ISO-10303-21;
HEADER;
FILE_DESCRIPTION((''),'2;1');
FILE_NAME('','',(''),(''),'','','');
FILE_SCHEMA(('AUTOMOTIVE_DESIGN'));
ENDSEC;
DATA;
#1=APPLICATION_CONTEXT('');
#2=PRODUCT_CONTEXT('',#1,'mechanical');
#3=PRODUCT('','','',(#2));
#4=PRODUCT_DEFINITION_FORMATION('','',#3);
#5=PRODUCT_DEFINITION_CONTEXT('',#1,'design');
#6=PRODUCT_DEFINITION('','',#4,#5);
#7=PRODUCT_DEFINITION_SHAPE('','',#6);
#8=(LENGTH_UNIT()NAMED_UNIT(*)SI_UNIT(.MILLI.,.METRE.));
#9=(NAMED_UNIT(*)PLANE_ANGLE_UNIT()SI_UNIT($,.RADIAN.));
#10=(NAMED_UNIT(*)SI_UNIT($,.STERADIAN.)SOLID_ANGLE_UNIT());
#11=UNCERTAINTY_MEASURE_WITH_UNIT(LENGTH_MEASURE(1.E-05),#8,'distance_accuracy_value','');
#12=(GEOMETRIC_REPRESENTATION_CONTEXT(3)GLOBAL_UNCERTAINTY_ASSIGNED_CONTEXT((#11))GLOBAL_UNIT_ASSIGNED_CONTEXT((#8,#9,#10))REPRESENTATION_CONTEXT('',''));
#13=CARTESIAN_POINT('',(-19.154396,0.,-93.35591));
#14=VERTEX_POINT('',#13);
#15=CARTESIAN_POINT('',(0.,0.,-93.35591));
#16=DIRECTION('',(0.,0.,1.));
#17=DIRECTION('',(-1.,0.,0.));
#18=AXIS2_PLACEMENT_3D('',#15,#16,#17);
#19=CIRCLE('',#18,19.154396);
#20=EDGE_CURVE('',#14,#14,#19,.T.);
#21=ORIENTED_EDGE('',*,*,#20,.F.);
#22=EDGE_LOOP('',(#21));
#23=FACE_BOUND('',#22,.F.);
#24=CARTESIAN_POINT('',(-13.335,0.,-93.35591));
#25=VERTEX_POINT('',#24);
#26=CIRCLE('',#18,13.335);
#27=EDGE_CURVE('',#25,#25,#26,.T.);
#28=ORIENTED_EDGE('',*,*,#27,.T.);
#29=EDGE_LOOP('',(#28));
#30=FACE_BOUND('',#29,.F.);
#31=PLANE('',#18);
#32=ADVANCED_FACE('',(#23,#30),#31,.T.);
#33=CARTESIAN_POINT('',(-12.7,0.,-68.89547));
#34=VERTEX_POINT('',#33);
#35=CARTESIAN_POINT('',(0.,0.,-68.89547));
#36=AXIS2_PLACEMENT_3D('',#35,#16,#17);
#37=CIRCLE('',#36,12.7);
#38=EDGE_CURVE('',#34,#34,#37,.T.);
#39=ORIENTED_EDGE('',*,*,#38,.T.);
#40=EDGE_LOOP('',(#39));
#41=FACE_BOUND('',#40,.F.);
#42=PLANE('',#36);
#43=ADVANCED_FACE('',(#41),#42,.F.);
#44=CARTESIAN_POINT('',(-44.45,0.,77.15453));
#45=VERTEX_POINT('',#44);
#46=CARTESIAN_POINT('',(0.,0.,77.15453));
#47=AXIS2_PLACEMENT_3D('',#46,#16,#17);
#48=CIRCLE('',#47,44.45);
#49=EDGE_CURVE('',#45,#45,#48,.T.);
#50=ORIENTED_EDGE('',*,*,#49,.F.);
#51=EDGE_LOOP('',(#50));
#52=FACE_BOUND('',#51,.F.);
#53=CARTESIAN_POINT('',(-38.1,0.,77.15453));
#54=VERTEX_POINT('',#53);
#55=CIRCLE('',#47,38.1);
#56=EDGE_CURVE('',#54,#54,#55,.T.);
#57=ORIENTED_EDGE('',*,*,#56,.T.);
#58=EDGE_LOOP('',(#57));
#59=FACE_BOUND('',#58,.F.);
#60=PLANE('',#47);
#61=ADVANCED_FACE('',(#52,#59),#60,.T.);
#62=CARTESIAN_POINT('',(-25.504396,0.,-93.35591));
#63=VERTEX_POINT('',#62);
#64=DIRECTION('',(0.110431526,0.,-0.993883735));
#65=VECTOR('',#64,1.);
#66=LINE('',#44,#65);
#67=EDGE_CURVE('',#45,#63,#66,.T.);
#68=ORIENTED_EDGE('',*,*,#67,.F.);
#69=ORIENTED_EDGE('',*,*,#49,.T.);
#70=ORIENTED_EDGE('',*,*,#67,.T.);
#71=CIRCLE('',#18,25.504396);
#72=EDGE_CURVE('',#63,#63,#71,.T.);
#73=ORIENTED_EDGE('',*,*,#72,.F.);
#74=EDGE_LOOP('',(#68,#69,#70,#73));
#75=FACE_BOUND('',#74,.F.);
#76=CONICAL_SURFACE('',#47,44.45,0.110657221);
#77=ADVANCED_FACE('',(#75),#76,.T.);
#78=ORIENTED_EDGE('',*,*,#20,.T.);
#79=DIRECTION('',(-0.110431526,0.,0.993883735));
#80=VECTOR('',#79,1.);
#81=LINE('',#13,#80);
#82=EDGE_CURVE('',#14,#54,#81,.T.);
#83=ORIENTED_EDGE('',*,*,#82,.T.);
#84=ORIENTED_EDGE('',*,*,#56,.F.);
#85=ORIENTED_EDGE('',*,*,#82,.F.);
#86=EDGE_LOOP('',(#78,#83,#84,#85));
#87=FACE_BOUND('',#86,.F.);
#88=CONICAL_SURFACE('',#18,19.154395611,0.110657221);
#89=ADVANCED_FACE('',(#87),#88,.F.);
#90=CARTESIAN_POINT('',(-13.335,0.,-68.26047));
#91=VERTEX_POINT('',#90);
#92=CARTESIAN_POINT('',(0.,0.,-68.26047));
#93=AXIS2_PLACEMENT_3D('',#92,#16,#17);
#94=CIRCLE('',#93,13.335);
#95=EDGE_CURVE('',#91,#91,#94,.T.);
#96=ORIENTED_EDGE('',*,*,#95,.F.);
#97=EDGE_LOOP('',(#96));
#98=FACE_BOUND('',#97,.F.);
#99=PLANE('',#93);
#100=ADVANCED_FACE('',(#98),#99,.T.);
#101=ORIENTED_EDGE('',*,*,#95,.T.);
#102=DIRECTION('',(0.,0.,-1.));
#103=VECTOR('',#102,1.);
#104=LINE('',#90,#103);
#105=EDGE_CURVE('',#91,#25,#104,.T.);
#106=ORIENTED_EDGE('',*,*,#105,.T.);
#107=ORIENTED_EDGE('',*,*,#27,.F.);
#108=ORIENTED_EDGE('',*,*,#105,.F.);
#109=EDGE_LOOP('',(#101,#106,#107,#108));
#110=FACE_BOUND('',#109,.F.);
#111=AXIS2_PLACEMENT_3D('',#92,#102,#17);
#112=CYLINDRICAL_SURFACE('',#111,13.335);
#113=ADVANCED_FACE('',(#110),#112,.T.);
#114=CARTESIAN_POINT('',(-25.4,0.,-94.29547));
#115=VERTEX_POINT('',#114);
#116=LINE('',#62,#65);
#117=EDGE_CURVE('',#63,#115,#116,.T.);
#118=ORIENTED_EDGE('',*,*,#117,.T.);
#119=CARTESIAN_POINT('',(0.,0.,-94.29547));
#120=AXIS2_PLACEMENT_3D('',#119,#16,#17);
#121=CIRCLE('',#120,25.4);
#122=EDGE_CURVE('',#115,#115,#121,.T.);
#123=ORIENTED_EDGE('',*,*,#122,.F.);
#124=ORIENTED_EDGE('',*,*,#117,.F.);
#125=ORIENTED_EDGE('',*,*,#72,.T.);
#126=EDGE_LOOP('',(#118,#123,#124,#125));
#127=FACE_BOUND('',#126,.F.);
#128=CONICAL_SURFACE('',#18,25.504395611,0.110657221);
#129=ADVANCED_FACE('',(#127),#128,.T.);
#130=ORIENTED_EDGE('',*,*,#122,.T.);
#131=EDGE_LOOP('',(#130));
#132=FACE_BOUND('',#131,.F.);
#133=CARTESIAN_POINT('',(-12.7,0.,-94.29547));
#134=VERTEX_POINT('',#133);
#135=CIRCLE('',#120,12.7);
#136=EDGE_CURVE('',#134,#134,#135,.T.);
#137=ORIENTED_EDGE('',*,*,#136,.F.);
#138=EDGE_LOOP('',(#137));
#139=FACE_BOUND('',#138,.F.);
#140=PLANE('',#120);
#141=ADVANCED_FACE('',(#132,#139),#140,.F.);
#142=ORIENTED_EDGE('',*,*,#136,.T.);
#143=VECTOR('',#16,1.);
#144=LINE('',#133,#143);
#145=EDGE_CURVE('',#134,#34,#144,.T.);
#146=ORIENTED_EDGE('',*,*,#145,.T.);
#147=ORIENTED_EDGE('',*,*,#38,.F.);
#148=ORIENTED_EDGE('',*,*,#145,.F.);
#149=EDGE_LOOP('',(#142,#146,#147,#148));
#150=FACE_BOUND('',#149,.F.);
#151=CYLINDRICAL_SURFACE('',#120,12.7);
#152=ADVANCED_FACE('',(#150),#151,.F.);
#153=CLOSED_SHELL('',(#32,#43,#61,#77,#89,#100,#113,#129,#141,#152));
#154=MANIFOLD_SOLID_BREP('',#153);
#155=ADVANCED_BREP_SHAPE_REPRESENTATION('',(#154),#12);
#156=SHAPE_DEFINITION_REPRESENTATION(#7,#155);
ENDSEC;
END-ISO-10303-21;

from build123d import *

# Parameters (mm, degrees)
F0_W = 0.635
F0_H = 0.9395605023


with BuildPart() as f1:
    # F0 (on Front) → F1 (revolve)
    with BuildSketch(Plane.XZ):
        Polygon((-19.05, -94.2954702053), (-19.1543956114, -93.355909703), (-25.5043956114, -93.355909703), (-25.4, -94.2954702053), align=None)
        with Locations((-13.0175, -93.8256899541)):
            Rectangle(F0_W, F0_H)
        Polygon((0, -68.8954702053), (0, -68.2604702053), (-13.335, -68.2604702053), (-13.335, -93.355909703), (-12.7, -93.355909703), (-12.7, -68.8954702053), align=None)
        Polygon((-13.335, -93.355909703), (-19.1543956114, -93.355909703), (-19.05, -94.2954702053), (-13.335, -94.2954702053), align=None)
        Polygon((-19.1543956114, -93.355909703), (-38.1, 77.1545297947), (-44.45, 77.1545297947), (-25.5043956114, -93.355909703), align=None)
    revolve(axis=Axis((0, 0, 4.1295297947), (0, 0, 1)))


solid = f1.part
